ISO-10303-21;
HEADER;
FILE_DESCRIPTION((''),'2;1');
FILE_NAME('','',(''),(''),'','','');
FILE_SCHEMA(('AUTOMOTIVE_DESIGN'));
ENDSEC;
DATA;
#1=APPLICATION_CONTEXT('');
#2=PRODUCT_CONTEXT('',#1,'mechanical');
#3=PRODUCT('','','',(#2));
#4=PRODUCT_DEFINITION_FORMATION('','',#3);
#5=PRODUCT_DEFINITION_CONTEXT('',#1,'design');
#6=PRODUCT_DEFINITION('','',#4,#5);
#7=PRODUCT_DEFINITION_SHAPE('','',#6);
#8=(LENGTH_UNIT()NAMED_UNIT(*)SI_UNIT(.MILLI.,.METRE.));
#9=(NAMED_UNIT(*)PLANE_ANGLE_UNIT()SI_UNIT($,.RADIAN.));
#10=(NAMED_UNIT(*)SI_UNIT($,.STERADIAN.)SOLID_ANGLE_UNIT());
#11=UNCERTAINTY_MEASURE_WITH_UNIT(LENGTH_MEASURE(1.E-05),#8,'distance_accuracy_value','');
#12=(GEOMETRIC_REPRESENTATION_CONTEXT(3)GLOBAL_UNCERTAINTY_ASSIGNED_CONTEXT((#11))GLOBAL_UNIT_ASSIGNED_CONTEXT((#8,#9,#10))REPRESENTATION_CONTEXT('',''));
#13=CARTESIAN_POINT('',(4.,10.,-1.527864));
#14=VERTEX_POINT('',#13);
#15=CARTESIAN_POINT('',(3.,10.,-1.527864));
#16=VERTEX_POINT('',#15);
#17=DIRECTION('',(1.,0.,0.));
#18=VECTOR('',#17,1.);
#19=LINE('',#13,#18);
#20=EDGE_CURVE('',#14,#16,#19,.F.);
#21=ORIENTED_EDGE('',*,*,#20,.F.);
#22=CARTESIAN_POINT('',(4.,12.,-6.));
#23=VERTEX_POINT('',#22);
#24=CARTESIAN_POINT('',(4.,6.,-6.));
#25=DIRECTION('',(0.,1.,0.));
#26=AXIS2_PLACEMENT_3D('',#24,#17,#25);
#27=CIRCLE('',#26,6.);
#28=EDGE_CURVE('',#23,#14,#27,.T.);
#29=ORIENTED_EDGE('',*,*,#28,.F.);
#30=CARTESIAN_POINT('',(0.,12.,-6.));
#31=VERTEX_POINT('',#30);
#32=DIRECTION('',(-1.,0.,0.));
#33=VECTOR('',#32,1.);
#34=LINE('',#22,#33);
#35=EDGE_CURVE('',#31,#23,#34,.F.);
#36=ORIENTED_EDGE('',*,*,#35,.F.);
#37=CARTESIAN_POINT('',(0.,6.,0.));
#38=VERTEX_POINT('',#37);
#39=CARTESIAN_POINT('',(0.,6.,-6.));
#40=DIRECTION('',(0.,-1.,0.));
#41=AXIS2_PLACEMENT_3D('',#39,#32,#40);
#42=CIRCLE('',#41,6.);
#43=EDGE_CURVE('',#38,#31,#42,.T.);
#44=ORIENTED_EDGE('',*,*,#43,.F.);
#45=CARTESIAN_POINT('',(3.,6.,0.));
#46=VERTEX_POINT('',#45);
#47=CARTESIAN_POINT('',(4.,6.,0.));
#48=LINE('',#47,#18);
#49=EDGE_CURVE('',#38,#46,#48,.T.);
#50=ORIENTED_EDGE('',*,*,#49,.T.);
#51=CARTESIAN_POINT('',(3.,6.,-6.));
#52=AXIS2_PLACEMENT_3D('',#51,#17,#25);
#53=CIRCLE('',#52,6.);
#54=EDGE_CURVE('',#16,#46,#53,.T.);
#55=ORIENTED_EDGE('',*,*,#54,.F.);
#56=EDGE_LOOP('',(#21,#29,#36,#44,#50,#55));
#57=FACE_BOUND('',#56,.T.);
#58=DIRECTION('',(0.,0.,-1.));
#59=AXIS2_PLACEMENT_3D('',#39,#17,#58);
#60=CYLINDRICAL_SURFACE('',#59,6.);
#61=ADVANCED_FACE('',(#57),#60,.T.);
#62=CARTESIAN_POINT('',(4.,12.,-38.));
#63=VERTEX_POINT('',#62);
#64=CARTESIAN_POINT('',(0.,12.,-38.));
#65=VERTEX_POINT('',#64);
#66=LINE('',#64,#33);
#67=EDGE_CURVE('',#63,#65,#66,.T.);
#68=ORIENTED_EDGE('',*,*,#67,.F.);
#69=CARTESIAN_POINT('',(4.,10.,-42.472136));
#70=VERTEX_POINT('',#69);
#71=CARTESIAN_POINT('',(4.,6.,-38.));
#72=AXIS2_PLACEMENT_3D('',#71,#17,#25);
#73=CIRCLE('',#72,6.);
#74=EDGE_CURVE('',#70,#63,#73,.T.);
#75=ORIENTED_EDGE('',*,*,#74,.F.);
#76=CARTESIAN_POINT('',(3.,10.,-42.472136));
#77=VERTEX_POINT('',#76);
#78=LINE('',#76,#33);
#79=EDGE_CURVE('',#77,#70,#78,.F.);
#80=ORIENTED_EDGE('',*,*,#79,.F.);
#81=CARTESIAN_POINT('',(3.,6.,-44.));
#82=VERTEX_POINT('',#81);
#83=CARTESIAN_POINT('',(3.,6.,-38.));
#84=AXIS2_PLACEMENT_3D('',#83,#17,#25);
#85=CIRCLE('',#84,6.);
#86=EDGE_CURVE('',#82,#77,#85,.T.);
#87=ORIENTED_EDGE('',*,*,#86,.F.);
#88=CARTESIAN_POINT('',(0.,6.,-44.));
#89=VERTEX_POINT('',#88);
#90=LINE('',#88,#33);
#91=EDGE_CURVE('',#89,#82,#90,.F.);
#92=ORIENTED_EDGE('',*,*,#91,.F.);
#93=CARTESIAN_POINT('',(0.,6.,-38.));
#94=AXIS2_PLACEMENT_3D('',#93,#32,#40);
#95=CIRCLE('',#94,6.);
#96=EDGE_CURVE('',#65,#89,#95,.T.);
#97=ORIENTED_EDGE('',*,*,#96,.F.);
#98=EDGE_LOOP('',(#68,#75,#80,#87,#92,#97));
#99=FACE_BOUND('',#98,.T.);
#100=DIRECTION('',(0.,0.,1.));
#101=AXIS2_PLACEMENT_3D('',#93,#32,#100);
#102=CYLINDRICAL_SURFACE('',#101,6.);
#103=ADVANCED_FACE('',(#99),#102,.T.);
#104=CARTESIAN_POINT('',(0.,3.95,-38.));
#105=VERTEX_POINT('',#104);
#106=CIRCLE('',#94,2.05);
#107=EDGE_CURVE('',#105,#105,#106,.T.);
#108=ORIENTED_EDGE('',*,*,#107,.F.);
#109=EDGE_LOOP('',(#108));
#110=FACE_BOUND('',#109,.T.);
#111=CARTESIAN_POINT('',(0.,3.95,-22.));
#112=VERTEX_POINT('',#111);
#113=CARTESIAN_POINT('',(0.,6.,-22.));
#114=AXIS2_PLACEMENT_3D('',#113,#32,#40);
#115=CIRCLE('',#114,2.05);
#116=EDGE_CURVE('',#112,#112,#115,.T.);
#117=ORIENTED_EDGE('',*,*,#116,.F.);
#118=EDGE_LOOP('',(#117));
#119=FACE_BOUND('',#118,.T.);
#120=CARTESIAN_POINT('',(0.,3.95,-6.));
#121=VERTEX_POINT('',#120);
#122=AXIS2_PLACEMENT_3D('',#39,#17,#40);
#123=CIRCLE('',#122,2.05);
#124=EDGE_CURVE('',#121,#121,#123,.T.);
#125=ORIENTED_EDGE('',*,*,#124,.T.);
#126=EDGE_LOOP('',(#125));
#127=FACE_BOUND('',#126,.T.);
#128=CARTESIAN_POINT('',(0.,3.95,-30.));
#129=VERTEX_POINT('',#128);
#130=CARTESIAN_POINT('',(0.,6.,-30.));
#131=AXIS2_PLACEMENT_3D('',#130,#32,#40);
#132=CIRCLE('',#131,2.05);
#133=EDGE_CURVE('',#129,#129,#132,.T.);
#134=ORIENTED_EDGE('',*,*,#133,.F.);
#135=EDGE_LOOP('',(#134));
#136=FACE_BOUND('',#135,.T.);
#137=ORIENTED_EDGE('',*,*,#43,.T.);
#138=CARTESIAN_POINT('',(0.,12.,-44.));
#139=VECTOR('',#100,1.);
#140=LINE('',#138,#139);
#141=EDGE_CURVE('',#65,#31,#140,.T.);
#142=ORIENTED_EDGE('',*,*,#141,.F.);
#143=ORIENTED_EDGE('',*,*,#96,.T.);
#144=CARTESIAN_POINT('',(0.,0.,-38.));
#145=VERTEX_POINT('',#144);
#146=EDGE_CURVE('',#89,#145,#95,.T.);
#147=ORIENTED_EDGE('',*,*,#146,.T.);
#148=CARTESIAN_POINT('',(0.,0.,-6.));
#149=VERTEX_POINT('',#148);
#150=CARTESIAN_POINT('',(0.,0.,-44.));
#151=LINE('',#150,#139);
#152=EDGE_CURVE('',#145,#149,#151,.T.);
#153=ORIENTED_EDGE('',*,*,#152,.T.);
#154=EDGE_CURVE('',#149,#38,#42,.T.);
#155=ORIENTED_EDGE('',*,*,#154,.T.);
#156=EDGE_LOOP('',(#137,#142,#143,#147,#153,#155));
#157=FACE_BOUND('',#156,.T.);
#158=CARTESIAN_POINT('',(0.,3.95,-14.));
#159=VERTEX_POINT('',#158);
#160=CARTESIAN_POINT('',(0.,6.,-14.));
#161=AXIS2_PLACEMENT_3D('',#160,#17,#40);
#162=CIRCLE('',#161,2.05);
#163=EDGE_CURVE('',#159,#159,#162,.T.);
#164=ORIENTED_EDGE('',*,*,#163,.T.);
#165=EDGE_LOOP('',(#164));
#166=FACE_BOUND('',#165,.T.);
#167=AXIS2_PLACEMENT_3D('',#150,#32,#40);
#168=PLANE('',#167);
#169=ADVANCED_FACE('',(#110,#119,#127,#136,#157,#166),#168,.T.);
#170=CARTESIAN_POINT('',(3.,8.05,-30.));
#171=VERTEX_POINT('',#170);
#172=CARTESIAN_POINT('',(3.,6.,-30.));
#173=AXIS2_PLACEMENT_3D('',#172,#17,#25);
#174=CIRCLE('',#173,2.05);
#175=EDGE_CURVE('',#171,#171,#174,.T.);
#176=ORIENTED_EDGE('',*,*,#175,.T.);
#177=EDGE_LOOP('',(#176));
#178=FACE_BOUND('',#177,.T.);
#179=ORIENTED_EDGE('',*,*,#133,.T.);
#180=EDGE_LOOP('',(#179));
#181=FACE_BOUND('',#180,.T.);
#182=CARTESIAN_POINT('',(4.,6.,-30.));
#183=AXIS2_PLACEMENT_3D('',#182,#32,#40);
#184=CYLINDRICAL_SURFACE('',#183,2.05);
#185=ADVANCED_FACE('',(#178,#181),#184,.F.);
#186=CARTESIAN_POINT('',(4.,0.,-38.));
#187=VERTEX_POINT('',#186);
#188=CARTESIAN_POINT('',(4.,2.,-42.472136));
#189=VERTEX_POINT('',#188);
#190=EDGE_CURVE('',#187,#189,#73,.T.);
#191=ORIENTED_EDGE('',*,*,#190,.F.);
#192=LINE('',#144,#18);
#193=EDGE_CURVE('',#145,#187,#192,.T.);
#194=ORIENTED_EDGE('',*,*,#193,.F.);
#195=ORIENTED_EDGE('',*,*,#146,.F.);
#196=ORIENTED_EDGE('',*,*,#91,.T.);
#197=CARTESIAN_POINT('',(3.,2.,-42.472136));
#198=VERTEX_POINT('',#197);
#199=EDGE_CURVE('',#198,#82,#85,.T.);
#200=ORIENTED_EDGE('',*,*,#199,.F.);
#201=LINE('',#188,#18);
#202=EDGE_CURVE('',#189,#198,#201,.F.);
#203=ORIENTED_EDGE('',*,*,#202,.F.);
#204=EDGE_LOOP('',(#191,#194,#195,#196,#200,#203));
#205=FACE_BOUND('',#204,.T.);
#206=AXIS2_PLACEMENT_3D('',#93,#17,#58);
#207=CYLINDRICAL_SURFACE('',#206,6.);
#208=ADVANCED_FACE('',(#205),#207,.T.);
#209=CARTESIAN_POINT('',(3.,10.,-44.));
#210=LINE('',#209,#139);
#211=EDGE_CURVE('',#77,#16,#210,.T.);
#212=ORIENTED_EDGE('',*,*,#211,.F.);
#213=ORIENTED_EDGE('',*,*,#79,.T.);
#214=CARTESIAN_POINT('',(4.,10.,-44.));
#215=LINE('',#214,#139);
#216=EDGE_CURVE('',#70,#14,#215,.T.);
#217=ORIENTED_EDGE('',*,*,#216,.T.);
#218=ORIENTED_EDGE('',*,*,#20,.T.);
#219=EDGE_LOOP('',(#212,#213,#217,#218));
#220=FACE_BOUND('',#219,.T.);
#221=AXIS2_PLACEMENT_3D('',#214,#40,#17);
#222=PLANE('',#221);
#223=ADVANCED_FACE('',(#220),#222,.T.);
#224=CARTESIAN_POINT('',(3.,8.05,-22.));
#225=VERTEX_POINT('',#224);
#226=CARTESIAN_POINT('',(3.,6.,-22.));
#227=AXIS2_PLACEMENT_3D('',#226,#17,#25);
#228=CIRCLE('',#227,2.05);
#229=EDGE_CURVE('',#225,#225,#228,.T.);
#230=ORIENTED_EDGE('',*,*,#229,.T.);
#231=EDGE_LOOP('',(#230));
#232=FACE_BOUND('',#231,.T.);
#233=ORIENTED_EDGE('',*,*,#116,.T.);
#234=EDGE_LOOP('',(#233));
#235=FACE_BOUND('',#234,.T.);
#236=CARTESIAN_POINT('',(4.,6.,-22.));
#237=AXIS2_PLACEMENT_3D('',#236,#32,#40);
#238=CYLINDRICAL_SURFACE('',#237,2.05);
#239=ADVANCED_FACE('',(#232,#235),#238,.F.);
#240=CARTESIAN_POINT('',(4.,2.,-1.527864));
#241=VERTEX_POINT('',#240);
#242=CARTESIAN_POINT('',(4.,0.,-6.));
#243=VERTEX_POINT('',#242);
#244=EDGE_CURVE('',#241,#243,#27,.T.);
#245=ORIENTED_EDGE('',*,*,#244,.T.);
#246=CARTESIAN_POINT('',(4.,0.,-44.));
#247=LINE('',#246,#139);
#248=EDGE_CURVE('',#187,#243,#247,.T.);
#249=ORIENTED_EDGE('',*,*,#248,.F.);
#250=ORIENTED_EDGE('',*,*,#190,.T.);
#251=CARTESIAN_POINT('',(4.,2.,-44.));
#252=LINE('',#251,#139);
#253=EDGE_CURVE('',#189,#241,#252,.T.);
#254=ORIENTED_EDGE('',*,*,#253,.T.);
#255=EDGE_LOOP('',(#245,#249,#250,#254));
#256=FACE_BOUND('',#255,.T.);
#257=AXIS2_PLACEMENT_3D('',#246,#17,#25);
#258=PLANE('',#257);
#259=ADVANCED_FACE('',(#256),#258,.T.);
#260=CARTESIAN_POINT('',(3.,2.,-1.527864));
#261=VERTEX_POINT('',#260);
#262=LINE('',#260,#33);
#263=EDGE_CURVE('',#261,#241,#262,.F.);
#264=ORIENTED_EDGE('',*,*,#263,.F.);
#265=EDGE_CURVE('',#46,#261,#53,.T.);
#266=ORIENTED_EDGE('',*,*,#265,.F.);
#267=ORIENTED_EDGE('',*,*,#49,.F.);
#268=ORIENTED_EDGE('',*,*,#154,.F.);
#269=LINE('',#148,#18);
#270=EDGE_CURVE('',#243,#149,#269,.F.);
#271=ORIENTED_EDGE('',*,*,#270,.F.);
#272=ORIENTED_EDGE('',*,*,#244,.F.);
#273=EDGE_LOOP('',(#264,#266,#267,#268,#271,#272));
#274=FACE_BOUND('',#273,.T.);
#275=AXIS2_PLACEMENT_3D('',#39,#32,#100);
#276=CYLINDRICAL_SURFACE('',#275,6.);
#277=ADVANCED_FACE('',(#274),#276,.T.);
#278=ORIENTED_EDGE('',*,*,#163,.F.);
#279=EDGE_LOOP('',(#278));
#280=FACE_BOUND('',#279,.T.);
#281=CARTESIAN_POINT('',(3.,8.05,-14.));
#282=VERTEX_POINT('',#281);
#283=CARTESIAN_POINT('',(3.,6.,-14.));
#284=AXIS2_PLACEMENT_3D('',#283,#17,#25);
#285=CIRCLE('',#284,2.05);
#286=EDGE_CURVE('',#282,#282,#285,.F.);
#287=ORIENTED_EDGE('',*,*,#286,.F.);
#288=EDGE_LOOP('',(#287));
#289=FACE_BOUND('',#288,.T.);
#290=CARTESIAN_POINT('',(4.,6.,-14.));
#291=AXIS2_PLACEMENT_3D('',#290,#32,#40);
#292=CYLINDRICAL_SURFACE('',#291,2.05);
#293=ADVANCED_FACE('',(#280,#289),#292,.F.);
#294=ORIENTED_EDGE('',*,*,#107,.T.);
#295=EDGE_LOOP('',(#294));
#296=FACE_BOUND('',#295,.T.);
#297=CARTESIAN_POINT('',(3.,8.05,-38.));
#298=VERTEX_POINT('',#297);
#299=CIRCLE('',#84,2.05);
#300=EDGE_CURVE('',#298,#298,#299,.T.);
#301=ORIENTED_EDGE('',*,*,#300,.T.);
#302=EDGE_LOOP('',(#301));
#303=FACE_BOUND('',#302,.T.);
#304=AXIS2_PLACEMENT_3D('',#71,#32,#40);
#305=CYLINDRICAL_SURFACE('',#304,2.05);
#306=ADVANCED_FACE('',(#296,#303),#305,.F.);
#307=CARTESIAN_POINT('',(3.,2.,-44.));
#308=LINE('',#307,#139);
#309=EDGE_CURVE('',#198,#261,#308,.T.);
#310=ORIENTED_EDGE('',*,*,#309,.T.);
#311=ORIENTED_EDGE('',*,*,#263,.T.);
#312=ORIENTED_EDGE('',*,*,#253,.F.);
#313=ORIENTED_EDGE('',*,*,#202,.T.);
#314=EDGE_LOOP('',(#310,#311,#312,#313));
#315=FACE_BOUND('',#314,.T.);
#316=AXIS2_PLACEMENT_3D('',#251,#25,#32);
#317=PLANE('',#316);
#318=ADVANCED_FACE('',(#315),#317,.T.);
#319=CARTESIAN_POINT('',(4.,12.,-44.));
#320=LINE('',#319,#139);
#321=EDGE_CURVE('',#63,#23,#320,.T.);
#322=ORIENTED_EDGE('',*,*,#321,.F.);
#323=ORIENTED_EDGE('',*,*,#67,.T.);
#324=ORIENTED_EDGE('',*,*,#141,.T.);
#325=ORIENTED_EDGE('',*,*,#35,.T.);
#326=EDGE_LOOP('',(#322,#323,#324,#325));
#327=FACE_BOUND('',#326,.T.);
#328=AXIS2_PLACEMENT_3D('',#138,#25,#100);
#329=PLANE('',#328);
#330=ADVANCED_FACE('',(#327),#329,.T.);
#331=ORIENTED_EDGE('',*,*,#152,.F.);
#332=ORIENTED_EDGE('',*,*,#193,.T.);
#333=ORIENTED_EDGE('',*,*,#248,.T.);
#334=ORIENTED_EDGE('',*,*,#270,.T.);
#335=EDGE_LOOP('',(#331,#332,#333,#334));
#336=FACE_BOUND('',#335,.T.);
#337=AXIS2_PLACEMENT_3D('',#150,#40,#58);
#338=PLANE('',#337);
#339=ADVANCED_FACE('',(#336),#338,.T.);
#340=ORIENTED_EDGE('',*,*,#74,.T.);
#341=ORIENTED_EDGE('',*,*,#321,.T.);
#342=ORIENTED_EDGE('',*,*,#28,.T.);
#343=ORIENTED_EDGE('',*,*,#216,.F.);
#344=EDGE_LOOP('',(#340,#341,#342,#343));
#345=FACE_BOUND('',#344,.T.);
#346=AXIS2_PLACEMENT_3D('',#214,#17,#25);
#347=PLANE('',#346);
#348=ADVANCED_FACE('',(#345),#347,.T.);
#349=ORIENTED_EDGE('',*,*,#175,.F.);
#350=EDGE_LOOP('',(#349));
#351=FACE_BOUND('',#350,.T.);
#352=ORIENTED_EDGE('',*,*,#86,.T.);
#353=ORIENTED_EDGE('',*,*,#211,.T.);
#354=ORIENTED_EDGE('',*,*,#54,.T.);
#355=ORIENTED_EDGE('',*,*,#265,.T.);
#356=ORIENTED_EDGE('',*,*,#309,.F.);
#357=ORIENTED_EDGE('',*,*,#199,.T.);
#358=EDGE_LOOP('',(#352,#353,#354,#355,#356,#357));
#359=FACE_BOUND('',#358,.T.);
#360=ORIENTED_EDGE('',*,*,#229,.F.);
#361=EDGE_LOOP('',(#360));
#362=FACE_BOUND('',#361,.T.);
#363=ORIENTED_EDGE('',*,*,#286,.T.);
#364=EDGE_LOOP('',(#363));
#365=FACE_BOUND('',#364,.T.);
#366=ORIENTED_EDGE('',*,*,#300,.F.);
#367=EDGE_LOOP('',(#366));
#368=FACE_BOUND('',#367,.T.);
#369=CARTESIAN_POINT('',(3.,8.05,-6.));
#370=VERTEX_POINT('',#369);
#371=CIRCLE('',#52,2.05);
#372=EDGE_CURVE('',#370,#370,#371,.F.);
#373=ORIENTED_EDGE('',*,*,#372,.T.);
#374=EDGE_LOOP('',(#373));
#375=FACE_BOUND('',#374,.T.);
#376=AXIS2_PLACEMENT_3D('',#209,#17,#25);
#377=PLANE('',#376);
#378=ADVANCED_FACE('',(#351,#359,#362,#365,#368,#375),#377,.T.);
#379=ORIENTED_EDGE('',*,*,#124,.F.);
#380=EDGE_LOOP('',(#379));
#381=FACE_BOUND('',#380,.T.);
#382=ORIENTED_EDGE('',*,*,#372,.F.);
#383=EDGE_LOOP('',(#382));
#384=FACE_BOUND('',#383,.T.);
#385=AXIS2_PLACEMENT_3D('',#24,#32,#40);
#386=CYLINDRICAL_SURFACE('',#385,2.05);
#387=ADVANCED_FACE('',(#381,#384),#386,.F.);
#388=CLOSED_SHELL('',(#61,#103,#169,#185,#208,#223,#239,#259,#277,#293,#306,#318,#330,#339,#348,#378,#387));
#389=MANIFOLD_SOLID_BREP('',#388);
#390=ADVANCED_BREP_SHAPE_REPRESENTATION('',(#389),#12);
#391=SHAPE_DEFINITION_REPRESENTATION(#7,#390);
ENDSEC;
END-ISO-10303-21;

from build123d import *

# Parameters (mm, degrees)
BOSS_EXTRUDE1_DEPTH     = 44
FILLET1_R               = 6
SKETCH2_R               = 2.05
CUT_EXTRUDE1_DEPTH      = 46.782092569
LPATTERN1_COUNT         = 3
LPATTERN1_PITCH         = 8
MIRROR1_COPY_1_SKETCH_R = 2.05
MIRROR1_COPY_1_DEPTH    = 46.782092569
MIRROR1_COPY_2_SKETCH_R = 2.05
MIRROR1_COPY_2_DEPTH    = 46.782092569


with BuildPart() as part:
    # Sketch1 → Boss-Extrude1 (new body)
    with BuildSketch(Plane.XY):
        Polygon((0, 0), (4, 0), (4, 2), (3, 2), (3, 10), (4, 10), (4, 12), (0, 12), align=None)
    extrude(amount=-BOSS_EXTRUDE1_DEPTH)

    # Fillet1
    fillet1_edges = [part.edges().sort_by_distance(p)[0] for p in [
        (2, 12, 0),
        (2, 0, 0),
        (2, 0, -44),
        (2, 12, -44),
    ]]
    fillet(fillet1_edges, radius=FILLET1_R - 0.0001)  # a hair under: the kernel refuses the full size

    # Sketch2 → Cut-Extrude1 (cut, through all)
    with BuildSketch(Plane.ZY):
        with Locations(Location((-38, 6, 0), (0, 0, 270))):
            Circle(SKETCH2_R)
    cut_extrude1 = extrude(amount=-CUT_EXTRUDE1_DEPTH, mode=Mode.SUBTRACT)

    # LPattern1: Cut-Extrude1 ×3
    with Locations(*[(0, 0, i * LPATTERN1_PITCH) for i in range(1, LPATTERN1_COUNT)]):
        add(cut_extrude1, mode=Mode.SUBTRACT)

    # Mirror1: Cut-Extrude1 across plane
    add(cut_extrude1.mirror(Plane.XY.offset(-22)), mode=Mode.SUBTRACT)

    # Mirror1 copy 1 sketch → Mirror1 copy 1 (cut, through all)
    with BuildSketch(Plane(origin=(0, 0, -52), x_dir=(0, 0, -1), z_dir=(-1, 0, 0))):
        with Locations((-38, -6)):
            Circle(MIRROR1_COPY_1_SKETCH_R)
    extrude(amount=-MIRROR1_COPY_1_DEPTH, mode=Mode.SUBTRACT)

    # Mirror1 copy 2 sketch → Mirror1 copy 2 (cut, through all)
    with BuildSketch(Plane(origin=(0, 0, -60), x_dir=(0, 0, -1), z_dir=(-1, 0, 0))):
        with Locations((-38, -6)):
            Circle(MIRROR1_COPY_2_SKETCH_R)
    extrude(amount=-MIRROR1_COPY_2_DEPTH, mode=Mode.SUBTRACT)


solid = part.part
